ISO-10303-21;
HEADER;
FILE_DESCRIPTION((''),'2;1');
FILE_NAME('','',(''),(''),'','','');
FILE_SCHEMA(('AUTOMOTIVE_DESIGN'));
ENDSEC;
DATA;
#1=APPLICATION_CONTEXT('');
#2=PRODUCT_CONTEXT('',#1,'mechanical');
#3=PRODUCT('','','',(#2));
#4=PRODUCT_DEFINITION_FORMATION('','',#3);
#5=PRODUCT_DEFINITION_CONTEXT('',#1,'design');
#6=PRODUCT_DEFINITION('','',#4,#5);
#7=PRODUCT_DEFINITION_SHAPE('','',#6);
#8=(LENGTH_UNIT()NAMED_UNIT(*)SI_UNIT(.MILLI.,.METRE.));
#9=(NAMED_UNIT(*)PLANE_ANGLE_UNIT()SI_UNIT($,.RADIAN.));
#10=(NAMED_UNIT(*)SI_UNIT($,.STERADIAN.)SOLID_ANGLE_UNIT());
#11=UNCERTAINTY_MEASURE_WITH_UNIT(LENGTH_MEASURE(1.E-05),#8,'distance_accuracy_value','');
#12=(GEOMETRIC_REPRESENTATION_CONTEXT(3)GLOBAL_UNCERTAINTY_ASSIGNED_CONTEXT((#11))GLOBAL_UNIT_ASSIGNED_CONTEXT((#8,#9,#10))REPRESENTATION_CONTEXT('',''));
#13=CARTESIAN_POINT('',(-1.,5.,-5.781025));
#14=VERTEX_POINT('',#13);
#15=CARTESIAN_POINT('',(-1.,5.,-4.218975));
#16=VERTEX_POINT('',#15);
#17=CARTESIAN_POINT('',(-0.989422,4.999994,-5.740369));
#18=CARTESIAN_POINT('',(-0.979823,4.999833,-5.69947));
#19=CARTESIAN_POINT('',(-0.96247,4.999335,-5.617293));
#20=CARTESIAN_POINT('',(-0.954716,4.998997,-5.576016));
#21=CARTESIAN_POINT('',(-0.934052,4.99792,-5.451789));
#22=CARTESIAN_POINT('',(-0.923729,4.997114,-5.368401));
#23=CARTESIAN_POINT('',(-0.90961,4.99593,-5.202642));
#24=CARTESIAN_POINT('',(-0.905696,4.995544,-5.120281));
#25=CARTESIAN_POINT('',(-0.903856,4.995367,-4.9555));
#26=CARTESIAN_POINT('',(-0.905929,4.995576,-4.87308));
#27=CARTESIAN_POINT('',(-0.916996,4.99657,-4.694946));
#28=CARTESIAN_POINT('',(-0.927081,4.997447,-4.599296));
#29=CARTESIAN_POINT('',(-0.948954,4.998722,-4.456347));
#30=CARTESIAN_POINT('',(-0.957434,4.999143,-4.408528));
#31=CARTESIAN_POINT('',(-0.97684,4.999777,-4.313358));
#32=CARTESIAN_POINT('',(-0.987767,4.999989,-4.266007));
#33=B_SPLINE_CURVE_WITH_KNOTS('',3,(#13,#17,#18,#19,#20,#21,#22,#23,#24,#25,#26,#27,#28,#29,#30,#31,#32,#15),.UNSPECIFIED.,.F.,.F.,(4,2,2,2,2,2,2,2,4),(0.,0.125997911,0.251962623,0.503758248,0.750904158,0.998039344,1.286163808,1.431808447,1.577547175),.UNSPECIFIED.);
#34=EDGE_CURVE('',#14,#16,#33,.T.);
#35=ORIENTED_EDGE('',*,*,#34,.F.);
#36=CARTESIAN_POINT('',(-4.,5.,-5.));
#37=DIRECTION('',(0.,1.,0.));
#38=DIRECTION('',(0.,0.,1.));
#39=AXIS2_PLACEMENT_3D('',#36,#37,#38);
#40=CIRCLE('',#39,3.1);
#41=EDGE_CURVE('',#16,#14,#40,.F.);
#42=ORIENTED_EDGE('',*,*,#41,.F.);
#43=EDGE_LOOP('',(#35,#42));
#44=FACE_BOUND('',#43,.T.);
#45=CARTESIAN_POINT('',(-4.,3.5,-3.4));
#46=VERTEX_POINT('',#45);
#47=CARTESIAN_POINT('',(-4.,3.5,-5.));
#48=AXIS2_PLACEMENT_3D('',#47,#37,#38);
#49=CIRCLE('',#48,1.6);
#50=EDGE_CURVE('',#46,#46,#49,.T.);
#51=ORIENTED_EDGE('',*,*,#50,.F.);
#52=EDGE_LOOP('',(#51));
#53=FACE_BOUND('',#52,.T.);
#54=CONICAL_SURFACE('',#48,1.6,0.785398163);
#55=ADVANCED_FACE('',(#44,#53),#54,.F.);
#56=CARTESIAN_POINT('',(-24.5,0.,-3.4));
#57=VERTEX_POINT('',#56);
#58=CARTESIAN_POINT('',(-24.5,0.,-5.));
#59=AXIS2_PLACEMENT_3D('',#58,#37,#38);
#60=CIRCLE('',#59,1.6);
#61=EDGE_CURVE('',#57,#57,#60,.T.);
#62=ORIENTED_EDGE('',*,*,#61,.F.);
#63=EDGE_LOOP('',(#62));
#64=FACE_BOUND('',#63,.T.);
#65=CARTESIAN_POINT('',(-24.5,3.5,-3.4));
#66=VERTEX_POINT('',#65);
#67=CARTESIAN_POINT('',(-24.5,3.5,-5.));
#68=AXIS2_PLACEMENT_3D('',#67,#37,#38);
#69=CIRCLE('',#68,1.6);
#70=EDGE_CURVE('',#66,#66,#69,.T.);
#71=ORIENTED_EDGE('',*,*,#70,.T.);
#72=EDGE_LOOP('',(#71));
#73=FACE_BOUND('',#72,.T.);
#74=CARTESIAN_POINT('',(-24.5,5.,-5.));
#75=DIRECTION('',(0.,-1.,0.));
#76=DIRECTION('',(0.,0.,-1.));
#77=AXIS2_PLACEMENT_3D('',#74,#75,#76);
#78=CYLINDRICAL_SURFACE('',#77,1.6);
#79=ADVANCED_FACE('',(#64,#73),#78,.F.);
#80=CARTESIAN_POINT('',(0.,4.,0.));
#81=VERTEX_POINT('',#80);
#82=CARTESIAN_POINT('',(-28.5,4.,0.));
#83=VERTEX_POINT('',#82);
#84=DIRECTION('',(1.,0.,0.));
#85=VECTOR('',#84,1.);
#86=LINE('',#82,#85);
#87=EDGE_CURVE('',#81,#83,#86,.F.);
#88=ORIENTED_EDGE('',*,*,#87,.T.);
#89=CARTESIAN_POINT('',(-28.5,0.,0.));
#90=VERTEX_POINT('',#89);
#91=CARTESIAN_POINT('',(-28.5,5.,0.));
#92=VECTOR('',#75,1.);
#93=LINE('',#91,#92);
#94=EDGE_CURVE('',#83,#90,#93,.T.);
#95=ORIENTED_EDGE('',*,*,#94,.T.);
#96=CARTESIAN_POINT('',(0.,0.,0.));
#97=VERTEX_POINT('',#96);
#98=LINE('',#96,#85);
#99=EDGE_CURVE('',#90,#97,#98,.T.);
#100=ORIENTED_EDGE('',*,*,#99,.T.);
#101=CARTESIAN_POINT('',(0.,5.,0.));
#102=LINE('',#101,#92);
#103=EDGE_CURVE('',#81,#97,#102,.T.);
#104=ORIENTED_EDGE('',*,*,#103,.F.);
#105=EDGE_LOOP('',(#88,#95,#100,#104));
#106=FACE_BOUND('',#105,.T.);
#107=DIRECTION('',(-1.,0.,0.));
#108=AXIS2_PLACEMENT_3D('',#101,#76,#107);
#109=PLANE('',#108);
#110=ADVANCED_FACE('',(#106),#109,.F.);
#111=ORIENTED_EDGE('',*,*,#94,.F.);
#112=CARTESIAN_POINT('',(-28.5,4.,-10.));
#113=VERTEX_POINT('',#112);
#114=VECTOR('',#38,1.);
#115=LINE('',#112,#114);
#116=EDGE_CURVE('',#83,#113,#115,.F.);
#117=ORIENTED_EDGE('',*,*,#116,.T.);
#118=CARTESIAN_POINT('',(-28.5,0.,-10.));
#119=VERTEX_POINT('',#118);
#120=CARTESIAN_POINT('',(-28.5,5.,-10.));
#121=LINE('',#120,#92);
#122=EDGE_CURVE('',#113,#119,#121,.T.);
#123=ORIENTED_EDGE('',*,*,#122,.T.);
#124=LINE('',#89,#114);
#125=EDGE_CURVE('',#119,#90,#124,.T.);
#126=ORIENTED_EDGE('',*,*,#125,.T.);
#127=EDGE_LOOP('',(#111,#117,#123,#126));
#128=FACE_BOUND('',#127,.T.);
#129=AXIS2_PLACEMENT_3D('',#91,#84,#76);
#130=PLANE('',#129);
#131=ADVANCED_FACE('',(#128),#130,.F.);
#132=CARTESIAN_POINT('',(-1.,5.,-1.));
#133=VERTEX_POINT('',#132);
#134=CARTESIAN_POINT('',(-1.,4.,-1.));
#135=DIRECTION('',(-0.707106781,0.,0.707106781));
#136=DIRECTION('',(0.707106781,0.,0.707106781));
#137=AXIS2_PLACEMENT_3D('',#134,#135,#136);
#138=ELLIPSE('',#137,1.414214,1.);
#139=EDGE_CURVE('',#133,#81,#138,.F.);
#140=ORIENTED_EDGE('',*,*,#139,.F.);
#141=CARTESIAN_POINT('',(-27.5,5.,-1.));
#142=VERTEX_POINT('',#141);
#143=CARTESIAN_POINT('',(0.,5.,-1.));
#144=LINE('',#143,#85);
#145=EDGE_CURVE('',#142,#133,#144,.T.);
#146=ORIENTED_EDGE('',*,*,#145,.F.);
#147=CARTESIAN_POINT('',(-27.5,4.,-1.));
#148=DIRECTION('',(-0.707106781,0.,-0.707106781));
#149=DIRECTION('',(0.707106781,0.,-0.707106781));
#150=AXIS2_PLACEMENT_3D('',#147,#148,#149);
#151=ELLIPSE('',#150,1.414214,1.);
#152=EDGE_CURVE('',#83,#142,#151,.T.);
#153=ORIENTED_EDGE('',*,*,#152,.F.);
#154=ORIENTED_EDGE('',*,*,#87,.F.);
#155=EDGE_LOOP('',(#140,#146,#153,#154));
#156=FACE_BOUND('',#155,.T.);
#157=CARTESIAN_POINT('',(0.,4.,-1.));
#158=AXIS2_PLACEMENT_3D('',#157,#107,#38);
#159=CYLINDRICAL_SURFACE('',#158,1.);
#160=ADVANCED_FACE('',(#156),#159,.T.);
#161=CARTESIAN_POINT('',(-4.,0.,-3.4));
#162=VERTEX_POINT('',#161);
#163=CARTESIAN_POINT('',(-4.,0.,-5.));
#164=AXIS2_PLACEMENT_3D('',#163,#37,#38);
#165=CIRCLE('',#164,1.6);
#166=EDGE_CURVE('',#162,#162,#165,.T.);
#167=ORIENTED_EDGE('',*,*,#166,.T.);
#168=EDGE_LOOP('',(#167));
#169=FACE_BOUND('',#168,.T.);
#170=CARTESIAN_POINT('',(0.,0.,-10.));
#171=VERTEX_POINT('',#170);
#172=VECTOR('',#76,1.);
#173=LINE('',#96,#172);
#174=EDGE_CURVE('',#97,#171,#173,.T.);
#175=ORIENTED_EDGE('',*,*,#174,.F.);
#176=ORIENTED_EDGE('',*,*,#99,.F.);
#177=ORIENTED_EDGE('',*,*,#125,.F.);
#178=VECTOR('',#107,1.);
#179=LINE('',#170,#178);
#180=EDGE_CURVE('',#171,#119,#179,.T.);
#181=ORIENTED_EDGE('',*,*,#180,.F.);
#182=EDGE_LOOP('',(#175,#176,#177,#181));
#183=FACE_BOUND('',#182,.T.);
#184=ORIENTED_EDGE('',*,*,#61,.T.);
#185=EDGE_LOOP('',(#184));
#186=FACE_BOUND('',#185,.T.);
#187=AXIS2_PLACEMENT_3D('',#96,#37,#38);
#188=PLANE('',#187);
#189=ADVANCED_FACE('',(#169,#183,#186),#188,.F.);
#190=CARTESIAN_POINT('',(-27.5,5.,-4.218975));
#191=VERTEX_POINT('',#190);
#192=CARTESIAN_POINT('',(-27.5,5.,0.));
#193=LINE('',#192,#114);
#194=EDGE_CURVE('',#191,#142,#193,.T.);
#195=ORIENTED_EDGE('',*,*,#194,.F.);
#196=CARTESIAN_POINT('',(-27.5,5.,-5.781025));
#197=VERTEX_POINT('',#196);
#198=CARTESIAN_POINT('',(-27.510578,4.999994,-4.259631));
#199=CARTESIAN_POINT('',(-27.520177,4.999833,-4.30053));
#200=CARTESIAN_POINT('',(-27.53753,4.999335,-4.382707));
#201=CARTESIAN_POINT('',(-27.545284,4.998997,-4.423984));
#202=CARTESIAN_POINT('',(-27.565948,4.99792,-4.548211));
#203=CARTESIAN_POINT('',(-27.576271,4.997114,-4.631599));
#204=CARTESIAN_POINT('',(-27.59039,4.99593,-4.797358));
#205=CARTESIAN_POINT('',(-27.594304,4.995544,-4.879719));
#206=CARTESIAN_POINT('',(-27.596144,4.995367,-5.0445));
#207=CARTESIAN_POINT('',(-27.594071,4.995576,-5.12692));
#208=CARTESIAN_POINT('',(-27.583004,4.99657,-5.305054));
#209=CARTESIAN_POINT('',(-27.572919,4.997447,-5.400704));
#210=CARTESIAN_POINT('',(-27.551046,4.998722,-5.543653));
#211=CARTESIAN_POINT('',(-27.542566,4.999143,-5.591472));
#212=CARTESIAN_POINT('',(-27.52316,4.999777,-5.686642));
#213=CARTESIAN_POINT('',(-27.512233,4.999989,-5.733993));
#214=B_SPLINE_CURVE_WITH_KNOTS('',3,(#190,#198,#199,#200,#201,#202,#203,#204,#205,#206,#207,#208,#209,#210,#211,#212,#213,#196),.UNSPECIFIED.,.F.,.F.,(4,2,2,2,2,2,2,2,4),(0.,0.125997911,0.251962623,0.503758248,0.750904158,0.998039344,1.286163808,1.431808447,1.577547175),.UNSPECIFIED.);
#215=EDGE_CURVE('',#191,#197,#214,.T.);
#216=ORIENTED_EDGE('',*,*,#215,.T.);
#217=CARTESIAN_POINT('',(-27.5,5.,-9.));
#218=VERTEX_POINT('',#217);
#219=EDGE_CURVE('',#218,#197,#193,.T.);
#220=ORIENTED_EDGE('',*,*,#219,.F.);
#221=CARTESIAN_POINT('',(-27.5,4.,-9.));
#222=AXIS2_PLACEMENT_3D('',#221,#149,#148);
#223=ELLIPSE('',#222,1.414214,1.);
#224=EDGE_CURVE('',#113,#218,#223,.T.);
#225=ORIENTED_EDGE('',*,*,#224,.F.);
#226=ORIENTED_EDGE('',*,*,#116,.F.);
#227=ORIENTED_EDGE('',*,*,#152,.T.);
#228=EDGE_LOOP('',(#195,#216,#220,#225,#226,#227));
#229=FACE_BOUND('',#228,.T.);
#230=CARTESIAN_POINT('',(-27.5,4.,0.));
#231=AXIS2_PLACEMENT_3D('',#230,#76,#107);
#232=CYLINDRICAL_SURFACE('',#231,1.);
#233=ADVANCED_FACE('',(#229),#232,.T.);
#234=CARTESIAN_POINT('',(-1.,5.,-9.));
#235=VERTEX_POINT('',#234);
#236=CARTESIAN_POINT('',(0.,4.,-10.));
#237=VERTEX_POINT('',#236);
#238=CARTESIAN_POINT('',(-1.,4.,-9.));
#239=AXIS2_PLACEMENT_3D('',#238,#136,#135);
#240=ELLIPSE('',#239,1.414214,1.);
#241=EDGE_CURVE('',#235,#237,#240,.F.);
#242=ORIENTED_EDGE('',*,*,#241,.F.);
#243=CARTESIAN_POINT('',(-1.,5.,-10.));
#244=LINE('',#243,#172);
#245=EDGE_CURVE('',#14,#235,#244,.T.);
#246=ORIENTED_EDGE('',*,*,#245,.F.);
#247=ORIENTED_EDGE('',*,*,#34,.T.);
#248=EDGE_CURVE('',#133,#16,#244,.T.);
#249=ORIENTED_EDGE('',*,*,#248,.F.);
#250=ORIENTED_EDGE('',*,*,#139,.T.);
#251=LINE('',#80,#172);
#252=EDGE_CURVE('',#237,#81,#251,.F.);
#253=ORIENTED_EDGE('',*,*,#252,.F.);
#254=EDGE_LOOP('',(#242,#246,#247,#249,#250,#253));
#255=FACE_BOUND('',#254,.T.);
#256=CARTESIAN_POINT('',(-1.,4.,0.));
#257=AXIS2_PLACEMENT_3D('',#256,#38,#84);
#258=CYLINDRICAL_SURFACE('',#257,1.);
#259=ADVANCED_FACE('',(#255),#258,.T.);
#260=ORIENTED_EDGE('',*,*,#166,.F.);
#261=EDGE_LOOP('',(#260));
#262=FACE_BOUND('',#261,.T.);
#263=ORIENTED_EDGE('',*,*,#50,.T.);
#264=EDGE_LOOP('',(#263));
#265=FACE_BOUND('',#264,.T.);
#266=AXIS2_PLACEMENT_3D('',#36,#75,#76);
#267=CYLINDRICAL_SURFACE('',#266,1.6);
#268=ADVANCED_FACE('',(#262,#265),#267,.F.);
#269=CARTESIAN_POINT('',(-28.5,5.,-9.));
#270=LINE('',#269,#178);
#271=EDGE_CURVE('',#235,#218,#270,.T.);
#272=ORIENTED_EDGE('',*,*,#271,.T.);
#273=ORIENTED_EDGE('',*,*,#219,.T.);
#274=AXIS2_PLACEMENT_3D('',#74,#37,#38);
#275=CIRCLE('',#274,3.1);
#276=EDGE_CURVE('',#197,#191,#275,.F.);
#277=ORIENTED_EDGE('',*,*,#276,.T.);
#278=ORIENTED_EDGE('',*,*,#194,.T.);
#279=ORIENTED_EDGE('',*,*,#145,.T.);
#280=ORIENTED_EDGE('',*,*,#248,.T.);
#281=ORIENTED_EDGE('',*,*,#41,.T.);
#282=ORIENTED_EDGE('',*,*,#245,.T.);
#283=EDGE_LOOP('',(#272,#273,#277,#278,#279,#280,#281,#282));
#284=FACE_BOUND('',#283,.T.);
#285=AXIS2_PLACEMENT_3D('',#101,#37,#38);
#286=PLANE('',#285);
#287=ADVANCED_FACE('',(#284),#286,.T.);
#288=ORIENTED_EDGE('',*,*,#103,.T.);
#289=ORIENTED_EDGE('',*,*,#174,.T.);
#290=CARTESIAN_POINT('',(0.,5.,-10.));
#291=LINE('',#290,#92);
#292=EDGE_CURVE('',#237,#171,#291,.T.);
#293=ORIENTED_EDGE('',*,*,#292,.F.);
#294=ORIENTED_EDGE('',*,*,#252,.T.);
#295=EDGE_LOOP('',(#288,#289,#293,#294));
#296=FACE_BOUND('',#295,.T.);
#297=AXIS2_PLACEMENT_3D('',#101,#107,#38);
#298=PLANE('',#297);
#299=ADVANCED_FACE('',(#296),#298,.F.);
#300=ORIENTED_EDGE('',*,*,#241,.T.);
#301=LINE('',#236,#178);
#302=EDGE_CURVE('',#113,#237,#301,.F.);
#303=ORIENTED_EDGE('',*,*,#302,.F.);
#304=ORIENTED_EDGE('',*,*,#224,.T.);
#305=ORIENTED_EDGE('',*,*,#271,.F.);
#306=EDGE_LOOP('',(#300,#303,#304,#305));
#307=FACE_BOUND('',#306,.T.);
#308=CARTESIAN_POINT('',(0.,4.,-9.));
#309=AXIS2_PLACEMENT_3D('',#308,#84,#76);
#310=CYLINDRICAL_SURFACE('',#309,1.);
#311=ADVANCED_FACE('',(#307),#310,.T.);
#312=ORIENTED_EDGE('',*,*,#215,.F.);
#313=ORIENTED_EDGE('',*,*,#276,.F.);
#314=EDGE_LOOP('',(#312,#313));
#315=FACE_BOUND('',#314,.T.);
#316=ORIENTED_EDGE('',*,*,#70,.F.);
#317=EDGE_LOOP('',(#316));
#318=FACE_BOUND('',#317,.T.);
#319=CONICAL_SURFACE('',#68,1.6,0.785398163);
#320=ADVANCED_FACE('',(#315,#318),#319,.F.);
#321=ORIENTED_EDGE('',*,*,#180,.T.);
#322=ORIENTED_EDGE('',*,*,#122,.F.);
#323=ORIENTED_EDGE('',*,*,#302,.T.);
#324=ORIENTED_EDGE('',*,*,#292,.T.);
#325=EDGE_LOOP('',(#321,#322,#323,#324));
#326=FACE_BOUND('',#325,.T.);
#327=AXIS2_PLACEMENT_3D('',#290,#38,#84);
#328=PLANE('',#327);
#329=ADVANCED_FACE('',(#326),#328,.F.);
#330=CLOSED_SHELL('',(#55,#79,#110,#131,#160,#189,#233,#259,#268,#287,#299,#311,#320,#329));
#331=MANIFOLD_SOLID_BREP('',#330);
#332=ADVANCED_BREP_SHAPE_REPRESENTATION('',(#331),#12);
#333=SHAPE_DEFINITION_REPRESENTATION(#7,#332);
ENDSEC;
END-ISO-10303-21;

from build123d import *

# Parameters (mm, degrees)
SKETCH1_W           = 28.5
SKETCH1_H           = 10
SKETCH1_R           = 1.6
BOSS_EXTRUDE1_DEPTH = 5
FILLET1_R           = 1
CHAMFER1_SIZE       = 1.5


with BuildPart() as part:
    # Sketch1 → Boss-Extrude1 (new body)
    with BuildSketch(Plane(origin=(0, 0, 0), x_dir=(1, 0, 0), z_dir=(0, 1, 0))):
        with Locations((-14.25, 5)):
            Rectangle(SKETCH1_W, SKETCH1_H)
        with Locations(Location((-4, 5, 0), (0, 0, 270))):
            Circle(SKETCH1_R, mode=Mode.SUBTRACT)
        with Locations(Location((-24.5, 5, 0), (0, 0, 270))):
            Circle(SKETCH1_R, mode=Mode.SUBTRACT)
    extrude(amount=BOSS_EXTRUDE1_DEPTH)

    # Fillet1
    fillet1_edges = [part.edges().sort_by_distance(p)[0] for p in [
        (-28.5, 5, -5),
        (-14.25, 5, 0),
        (0, 5, -5),
        (-14.25, 5, -10),
    ]]
    fillet(fillet1_edges, radius=FILLET1_R)

    # Chamfer1
    # the kernel refuses this chamfer: 1.5 mm, written as the material it takes off along each edge
    with BuildSketch(Plane(origin=(-4, 5, -5), x_dir=(0, 0, 1), z_dir=(-1, 0, 0))) as chamfer1_piece_1:
        Polygon((1.6 + CHAMFER1_SIZE, 0), (1.6, -CHAMFER1_SIZE), (1.6, 0), align=None)
    revolve(axis=Axis((-4, 5, -5), (0, 1, 0)), mode=Mode.SUBTRACT)
    with BuildSketch(Plane(origin=(-24.5, 5, -5), x_dir=(0, 0, 1), z_dir=(-1, 0, 0))) as chamfer1_piece_2:
        Polygon((1.6 + CHAMFER1_SIZE, 0), (1.6, -CHAMFER1_SIZE), (1.6, 0), align=None)
    revolve(axis=Axis((-24.5, 5, -5), (0, 1, 0)), mode=Mode.SUBTRACT)


solid = part.part
